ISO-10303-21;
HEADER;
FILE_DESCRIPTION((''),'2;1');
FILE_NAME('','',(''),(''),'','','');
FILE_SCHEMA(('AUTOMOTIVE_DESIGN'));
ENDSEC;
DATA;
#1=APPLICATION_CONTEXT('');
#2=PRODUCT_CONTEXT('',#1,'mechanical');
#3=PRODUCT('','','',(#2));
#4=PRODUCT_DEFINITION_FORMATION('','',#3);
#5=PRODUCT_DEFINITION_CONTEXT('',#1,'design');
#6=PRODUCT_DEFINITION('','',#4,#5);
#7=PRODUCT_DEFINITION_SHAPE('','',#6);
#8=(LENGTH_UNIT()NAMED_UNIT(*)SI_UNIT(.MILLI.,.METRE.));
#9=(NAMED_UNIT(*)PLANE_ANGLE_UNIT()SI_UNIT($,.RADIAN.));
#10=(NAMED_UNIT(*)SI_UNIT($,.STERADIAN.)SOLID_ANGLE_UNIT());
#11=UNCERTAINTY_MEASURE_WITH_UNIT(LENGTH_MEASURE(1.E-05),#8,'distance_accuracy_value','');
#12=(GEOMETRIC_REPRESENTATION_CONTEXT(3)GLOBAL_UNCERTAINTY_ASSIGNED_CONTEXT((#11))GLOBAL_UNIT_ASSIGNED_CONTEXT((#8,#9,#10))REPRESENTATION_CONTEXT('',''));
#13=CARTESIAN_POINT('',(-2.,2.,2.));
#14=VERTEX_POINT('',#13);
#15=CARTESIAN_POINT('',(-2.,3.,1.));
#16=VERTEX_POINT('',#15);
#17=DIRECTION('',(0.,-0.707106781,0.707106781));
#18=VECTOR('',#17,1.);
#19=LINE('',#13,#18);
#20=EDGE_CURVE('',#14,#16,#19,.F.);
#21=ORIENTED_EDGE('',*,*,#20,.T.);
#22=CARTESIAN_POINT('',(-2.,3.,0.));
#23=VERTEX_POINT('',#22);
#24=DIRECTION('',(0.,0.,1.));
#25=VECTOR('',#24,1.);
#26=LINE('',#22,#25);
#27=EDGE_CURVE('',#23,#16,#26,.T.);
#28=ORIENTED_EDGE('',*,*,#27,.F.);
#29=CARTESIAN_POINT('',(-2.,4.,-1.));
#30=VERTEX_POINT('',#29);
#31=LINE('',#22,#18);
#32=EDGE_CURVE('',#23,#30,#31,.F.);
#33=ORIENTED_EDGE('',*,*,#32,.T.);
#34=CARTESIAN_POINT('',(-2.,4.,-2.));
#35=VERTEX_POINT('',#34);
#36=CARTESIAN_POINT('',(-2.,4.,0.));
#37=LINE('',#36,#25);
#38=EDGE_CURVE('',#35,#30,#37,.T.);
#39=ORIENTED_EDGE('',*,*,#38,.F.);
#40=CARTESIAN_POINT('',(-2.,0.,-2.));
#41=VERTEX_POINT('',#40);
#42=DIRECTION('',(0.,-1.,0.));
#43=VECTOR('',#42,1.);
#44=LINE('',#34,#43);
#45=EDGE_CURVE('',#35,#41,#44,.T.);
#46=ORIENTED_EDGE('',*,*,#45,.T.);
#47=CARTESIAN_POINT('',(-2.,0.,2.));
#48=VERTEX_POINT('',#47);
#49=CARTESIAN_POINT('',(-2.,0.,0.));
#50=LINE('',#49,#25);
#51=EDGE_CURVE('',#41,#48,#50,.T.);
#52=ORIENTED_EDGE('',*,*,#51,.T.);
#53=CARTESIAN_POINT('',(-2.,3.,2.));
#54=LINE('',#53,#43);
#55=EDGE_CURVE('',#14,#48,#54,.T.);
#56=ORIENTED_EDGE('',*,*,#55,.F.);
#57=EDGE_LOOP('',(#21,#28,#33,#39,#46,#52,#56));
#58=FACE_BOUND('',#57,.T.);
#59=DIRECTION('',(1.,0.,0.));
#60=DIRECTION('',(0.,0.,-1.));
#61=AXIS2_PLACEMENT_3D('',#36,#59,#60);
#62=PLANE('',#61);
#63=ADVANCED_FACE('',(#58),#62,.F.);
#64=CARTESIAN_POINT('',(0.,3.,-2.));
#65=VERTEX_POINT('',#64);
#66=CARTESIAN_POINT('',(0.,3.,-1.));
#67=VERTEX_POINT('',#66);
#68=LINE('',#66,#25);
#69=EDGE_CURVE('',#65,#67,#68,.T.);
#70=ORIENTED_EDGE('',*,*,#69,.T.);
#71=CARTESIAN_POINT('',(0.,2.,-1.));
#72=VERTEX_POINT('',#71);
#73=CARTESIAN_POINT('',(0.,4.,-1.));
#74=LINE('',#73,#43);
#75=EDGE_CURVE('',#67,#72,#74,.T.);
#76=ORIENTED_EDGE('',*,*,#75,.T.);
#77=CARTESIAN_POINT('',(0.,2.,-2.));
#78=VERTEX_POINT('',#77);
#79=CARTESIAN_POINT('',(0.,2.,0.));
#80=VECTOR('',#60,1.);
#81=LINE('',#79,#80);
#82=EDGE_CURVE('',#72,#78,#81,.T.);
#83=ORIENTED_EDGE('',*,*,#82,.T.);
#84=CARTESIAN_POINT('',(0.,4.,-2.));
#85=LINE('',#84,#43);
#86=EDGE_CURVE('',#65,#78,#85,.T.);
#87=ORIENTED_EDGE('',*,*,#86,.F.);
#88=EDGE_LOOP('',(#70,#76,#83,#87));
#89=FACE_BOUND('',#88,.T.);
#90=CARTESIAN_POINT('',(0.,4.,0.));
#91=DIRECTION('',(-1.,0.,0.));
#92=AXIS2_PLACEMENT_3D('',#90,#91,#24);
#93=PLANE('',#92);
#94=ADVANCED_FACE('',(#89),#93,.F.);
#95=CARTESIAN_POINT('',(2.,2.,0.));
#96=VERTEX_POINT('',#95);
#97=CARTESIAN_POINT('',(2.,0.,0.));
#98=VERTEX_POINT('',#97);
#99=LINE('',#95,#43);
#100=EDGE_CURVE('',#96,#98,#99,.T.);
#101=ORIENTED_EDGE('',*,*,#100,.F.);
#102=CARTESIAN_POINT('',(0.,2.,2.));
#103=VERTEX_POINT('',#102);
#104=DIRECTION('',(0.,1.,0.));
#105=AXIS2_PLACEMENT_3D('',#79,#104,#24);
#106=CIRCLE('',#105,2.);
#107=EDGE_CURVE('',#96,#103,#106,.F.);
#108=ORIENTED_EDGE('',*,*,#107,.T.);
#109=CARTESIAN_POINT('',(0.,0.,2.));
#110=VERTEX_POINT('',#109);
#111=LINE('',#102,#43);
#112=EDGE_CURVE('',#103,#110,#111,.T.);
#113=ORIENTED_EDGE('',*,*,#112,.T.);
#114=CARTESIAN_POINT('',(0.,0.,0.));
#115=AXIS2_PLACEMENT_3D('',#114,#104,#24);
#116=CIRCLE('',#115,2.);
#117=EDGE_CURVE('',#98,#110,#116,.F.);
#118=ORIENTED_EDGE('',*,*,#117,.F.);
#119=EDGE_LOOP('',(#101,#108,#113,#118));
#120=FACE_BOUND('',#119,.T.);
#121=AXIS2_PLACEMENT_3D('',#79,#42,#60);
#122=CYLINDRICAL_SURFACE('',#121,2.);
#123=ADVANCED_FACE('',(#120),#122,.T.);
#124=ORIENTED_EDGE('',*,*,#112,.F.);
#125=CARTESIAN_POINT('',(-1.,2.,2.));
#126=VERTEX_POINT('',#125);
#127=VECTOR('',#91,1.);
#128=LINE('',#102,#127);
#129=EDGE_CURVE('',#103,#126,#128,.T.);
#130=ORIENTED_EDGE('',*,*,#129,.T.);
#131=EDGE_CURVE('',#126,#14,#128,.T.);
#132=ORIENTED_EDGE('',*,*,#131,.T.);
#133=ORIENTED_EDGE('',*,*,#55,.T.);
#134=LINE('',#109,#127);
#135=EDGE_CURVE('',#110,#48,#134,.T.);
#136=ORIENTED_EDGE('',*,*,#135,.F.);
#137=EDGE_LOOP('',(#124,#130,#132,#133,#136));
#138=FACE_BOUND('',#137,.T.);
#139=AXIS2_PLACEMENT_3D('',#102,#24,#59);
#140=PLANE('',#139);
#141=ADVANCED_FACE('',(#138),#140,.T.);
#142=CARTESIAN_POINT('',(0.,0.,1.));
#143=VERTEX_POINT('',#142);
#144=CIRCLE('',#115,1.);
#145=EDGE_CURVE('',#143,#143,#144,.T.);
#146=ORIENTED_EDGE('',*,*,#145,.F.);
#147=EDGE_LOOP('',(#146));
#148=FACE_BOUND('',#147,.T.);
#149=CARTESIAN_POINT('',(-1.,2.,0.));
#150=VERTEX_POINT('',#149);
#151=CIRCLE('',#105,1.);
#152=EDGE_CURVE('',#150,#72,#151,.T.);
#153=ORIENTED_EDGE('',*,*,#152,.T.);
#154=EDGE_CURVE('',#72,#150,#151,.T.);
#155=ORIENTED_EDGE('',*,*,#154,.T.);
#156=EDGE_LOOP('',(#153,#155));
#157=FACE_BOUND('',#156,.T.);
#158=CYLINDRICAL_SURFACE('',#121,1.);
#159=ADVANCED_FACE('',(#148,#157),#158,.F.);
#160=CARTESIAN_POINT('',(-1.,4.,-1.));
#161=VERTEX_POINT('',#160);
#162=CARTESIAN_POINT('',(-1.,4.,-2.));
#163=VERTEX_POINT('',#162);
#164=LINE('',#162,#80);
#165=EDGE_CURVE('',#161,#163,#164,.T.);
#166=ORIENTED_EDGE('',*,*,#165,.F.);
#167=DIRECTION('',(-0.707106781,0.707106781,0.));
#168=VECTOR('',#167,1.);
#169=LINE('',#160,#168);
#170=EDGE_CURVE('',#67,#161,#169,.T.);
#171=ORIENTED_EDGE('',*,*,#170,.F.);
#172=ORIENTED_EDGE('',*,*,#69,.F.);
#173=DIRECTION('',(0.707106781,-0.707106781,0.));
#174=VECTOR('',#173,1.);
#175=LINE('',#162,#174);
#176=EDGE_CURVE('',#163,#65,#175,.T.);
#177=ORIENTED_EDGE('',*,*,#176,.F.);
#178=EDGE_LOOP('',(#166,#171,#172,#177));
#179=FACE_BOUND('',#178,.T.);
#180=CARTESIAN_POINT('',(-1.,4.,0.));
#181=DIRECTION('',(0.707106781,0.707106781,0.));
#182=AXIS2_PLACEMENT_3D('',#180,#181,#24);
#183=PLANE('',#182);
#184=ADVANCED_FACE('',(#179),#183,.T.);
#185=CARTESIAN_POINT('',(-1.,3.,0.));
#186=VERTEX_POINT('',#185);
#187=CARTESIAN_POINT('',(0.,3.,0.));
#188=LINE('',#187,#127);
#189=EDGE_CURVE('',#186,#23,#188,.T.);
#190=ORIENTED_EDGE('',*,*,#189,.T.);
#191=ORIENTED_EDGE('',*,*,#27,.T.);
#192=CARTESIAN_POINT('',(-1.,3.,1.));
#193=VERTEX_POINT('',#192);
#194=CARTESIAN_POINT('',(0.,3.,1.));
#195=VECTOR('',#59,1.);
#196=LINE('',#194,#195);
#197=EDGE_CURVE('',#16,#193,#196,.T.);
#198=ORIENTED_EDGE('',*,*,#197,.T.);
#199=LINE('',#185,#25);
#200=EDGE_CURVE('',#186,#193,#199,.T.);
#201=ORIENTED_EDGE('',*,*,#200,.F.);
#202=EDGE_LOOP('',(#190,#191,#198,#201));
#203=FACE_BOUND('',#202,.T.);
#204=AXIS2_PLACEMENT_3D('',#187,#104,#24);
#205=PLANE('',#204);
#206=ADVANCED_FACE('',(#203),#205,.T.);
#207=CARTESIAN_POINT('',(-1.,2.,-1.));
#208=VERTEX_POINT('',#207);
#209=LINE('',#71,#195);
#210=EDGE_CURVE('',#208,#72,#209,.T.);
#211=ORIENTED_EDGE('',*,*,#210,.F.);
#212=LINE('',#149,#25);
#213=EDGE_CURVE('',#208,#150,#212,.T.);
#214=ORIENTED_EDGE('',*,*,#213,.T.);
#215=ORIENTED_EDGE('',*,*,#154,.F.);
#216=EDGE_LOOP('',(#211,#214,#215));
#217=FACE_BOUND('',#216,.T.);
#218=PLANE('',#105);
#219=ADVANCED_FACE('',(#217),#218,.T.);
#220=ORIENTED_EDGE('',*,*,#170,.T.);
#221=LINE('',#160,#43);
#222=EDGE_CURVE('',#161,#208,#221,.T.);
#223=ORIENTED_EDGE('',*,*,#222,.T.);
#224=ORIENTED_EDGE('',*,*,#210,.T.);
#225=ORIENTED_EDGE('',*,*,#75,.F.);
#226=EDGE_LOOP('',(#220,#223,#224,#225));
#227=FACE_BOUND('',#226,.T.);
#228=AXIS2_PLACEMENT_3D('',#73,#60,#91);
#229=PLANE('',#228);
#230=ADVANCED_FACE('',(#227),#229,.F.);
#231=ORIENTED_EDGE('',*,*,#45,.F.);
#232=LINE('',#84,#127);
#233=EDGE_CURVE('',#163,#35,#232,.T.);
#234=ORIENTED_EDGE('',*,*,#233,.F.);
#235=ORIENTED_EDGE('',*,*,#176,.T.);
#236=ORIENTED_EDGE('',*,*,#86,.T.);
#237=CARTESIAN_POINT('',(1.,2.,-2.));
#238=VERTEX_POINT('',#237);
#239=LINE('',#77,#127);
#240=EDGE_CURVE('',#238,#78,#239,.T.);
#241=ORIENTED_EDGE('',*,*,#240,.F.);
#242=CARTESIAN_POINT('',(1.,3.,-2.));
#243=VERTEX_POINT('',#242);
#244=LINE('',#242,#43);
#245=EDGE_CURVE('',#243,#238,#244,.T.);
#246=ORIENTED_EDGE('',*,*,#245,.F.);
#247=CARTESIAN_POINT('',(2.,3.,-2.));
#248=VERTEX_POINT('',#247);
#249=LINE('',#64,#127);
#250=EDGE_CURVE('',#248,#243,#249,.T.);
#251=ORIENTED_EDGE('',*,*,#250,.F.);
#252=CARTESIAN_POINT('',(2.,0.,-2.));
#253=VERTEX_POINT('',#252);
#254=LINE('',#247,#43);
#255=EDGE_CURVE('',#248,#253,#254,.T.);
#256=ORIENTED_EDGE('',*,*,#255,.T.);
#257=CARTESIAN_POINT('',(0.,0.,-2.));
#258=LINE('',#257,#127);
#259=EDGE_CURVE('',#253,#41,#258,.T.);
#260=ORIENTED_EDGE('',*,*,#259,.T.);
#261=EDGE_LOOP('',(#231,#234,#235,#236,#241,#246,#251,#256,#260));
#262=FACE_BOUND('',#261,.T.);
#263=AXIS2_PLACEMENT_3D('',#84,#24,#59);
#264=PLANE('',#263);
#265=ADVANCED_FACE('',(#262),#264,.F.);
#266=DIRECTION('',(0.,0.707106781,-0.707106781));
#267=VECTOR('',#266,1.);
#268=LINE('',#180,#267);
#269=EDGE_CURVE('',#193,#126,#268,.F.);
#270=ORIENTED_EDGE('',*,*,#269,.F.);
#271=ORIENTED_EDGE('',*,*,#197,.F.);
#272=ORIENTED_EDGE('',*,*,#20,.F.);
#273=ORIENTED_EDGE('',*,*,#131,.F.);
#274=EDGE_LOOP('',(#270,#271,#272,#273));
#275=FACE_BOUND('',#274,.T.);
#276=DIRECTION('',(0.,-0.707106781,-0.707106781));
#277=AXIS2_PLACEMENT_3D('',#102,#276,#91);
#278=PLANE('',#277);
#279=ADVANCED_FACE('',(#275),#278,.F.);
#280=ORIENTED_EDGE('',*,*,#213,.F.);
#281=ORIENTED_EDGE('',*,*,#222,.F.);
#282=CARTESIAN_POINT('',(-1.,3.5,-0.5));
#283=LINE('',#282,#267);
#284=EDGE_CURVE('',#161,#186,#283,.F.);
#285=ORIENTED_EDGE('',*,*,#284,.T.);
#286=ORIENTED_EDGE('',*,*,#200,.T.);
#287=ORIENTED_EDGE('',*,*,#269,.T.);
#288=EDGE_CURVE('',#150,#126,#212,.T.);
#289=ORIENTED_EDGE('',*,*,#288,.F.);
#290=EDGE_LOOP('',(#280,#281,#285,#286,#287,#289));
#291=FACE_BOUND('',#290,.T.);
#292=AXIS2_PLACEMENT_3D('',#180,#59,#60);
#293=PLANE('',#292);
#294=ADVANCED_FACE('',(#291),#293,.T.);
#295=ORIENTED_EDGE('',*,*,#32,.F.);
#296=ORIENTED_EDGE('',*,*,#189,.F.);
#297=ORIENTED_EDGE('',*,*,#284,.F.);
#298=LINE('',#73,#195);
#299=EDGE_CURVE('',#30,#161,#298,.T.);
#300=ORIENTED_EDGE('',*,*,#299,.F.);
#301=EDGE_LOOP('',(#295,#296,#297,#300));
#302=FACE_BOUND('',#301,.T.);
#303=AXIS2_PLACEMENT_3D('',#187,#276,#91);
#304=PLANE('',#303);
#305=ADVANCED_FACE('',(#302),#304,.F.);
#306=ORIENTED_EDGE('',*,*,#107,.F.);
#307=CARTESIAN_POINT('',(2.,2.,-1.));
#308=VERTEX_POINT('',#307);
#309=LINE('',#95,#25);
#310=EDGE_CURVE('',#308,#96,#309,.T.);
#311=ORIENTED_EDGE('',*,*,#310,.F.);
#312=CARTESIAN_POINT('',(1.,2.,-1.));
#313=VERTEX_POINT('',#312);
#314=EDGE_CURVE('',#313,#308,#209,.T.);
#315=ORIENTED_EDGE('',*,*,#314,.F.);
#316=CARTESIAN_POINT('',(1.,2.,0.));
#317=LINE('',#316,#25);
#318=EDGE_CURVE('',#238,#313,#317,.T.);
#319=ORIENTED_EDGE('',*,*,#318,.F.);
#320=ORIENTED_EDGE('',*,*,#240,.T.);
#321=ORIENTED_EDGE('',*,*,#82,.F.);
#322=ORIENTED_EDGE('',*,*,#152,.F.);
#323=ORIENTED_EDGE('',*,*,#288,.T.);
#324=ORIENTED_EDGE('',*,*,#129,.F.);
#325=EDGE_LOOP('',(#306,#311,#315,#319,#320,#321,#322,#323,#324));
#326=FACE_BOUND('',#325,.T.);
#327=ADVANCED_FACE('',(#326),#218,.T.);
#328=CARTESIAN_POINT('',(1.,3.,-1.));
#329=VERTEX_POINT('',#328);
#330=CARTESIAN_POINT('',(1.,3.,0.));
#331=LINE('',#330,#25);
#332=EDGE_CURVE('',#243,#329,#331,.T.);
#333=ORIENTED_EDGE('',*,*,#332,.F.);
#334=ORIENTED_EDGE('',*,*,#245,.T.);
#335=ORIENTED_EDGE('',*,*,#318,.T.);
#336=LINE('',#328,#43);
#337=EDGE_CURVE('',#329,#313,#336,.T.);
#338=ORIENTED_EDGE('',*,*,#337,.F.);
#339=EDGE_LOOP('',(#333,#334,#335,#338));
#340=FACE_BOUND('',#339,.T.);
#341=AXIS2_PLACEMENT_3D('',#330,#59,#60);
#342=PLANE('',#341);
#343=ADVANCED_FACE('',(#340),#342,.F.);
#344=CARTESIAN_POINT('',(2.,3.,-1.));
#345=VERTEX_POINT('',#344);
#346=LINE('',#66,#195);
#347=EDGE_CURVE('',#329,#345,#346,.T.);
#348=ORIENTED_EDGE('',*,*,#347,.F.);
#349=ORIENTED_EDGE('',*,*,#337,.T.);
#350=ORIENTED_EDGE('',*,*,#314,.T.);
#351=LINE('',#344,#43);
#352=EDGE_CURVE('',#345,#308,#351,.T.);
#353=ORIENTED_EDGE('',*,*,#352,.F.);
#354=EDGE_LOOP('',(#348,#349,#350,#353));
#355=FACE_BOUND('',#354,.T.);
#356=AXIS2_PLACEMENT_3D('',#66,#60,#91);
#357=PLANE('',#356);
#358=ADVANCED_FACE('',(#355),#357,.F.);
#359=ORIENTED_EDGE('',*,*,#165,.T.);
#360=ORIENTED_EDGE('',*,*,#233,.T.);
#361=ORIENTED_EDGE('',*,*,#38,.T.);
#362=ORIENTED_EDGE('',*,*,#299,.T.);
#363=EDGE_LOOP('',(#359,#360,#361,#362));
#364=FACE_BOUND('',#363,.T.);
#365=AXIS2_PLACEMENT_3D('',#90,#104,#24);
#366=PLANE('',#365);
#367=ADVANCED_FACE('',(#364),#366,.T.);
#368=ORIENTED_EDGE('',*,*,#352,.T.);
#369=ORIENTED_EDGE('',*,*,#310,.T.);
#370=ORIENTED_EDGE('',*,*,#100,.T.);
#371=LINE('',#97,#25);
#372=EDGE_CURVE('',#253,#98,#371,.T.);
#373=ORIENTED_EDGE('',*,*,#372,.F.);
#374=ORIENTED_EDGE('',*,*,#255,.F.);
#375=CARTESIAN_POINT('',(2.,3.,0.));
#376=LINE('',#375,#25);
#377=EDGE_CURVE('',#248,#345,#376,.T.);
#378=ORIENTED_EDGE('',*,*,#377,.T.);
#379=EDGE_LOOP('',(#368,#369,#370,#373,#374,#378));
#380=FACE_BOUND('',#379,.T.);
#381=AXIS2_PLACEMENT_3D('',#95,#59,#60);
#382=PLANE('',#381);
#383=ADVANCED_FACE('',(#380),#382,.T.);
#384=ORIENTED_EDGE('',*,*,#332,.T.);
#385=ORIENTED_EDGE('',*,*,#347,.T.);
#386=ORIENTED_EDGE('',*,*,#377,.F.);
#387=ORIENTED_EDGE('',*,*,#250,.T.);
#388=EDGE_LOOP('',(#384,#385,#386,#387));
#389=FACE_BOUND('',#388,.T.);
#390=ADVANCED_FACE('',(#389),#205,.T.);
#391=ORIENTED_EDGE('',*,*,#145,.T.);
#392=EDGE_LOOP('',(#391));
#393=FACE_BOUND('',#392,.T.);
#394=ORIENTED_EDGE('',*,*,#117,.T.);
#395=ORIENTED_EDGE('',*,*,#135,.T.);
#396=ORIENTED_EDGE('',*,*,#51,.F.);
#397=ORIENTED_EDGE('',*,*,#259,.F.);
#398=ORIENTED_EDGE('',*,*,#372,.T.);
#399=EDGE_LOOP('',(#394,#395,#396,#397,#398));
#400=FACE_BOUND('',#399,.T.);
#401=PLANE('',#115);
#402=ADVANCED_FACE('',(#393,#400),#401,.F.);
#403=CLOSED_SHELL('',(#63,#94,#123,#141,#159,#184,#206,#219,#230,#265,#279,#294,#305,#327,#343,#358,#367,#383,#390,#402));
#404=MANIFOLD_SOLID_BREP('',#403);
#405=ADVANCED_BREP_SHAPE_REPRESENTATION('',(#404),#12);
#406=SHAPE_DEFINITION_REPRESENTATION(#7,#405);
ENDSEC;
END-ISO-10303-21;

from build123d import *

# Parameters (mm, degrees)
EXTRUDE_1_DEPTH   = 2
EXTRUDE_1_2_DEPTH = 2
SKETCH_1_3_W      = 1
SKETCH_1_3_H      = 1
EXTRUDE_2_DEPTH   = 3
SKETCH_1_4_W      = 1
SKETCH_1_4_H      = 1
EXTRUDE_3_DEPTH   = 4
CHAMFER_1_SIZE    = 1


with BuildPart() as part:
    # 草圖1 → 填料-伸長1 (new body)
    with BuildSketch(Plane(origin=(0, 0, 0), x_dir=(1, 0, 0), z_dir=(0, 1, 0))):
        with BuildLine():
            Line((0, 2), (0, 1))
            ThreePointArc((0, 1), (0.707106781, 0.707106781), (1, 0))
            ThreePointArc((1, 0), (0, -1), (-1, 0))
            Line((-1, 0), (-1, -1))
            Line((-1, -1), (-1, -2))
            Line((-1, -2), (0, -2))
            ThreePointArc((0, -2), (1.414213562, -1.414213562), (2, 0))
            Line((2, 0), (2, 1))
            Line((2, 1), (1, 1))
            Line((1, 1), (1, 2))
            Line((1, 2), (0, 2))
        make_face()
    extrude(amount=EXTRUDE_1_DEPTH)

    # 草圖1<3> → 填料-伸長2 (add)
    with BuildSketch(Plane(origin=(0, 0, 0), x_dir=(1, 0, 0), z_dir=(0, 1, 0))):
        with Locations((1.5, 1.5)):
            Rectangle(SKETCH_1_3_W, SKETCH_1_3_H)
        with Locations((-1.5, -1.5)):
            Rectangle(SKETCH_1_3_W, SKETCH_1_3_H)
        with Locations((-1.5, -0.5)):
            Rectangle(SKETCH_1_3_W, SKETCH_1_3_H)
    extrude(amount=EXTRUDE_2_DEPTH)



with BuildPart() as body_2:
    # 草圖1 → Extrude 1 2 (new body)
    with BuildSketch(Plane(origin=(0, 0, 0), x_dir=(1, 0, 0), z_dir=(0, 1, 0))):
        with BuildLine():
            Line((0, 1), (-1, 1))
            Line((-1, 1), (-1, 0))
            ThreePointArc((-1, 0), (-0.707106781, 0.707106781), (0, 1))
        make_face()
    extrude(amount=EXTRUDE_1_2_DEPTH)


with BuildPart() as part_1:
    add(part.part)

    add(body_2.part)  # 填料-伸長3 merges body 2
    # 草圖1<4> → 填料-伸長3 (add)
    with BuildSketch(Plane(origin=(0, 0, 0), x_dir=(1, 0, 0), z_dir=(0, 1, 0))):
        with Locations((-0.5, 1.5)):
            Rectangle(SKETCH_1_4_W, SKETCH_1_4_H)
        with Locations((-1.5, 1.5)):
            Rectangle(SKETCH_1_4_W, SKETCH_1_4_H)
        with Locations((-1.5, 0.5)):
            Rectangle(SKETCH_1_4_W, SKETCH_1_4_H)
    extrude(amount=EXTRUDE_3_DEPTH)

    # 導角1
    chamfer_1_edges = [part_1.edges().sort_by_distance(p)[0] for p in [
        (0, 4, -1.5),
        (-1.5, 4, 0),
        (-1.5, 3, 2),
    ]]
    chamfer(chamfer_1_edges, length=CHAMFER_1_SIZE - 0.0001)  # a hair under: the kernel refuses the full size


solid = part_1.part
